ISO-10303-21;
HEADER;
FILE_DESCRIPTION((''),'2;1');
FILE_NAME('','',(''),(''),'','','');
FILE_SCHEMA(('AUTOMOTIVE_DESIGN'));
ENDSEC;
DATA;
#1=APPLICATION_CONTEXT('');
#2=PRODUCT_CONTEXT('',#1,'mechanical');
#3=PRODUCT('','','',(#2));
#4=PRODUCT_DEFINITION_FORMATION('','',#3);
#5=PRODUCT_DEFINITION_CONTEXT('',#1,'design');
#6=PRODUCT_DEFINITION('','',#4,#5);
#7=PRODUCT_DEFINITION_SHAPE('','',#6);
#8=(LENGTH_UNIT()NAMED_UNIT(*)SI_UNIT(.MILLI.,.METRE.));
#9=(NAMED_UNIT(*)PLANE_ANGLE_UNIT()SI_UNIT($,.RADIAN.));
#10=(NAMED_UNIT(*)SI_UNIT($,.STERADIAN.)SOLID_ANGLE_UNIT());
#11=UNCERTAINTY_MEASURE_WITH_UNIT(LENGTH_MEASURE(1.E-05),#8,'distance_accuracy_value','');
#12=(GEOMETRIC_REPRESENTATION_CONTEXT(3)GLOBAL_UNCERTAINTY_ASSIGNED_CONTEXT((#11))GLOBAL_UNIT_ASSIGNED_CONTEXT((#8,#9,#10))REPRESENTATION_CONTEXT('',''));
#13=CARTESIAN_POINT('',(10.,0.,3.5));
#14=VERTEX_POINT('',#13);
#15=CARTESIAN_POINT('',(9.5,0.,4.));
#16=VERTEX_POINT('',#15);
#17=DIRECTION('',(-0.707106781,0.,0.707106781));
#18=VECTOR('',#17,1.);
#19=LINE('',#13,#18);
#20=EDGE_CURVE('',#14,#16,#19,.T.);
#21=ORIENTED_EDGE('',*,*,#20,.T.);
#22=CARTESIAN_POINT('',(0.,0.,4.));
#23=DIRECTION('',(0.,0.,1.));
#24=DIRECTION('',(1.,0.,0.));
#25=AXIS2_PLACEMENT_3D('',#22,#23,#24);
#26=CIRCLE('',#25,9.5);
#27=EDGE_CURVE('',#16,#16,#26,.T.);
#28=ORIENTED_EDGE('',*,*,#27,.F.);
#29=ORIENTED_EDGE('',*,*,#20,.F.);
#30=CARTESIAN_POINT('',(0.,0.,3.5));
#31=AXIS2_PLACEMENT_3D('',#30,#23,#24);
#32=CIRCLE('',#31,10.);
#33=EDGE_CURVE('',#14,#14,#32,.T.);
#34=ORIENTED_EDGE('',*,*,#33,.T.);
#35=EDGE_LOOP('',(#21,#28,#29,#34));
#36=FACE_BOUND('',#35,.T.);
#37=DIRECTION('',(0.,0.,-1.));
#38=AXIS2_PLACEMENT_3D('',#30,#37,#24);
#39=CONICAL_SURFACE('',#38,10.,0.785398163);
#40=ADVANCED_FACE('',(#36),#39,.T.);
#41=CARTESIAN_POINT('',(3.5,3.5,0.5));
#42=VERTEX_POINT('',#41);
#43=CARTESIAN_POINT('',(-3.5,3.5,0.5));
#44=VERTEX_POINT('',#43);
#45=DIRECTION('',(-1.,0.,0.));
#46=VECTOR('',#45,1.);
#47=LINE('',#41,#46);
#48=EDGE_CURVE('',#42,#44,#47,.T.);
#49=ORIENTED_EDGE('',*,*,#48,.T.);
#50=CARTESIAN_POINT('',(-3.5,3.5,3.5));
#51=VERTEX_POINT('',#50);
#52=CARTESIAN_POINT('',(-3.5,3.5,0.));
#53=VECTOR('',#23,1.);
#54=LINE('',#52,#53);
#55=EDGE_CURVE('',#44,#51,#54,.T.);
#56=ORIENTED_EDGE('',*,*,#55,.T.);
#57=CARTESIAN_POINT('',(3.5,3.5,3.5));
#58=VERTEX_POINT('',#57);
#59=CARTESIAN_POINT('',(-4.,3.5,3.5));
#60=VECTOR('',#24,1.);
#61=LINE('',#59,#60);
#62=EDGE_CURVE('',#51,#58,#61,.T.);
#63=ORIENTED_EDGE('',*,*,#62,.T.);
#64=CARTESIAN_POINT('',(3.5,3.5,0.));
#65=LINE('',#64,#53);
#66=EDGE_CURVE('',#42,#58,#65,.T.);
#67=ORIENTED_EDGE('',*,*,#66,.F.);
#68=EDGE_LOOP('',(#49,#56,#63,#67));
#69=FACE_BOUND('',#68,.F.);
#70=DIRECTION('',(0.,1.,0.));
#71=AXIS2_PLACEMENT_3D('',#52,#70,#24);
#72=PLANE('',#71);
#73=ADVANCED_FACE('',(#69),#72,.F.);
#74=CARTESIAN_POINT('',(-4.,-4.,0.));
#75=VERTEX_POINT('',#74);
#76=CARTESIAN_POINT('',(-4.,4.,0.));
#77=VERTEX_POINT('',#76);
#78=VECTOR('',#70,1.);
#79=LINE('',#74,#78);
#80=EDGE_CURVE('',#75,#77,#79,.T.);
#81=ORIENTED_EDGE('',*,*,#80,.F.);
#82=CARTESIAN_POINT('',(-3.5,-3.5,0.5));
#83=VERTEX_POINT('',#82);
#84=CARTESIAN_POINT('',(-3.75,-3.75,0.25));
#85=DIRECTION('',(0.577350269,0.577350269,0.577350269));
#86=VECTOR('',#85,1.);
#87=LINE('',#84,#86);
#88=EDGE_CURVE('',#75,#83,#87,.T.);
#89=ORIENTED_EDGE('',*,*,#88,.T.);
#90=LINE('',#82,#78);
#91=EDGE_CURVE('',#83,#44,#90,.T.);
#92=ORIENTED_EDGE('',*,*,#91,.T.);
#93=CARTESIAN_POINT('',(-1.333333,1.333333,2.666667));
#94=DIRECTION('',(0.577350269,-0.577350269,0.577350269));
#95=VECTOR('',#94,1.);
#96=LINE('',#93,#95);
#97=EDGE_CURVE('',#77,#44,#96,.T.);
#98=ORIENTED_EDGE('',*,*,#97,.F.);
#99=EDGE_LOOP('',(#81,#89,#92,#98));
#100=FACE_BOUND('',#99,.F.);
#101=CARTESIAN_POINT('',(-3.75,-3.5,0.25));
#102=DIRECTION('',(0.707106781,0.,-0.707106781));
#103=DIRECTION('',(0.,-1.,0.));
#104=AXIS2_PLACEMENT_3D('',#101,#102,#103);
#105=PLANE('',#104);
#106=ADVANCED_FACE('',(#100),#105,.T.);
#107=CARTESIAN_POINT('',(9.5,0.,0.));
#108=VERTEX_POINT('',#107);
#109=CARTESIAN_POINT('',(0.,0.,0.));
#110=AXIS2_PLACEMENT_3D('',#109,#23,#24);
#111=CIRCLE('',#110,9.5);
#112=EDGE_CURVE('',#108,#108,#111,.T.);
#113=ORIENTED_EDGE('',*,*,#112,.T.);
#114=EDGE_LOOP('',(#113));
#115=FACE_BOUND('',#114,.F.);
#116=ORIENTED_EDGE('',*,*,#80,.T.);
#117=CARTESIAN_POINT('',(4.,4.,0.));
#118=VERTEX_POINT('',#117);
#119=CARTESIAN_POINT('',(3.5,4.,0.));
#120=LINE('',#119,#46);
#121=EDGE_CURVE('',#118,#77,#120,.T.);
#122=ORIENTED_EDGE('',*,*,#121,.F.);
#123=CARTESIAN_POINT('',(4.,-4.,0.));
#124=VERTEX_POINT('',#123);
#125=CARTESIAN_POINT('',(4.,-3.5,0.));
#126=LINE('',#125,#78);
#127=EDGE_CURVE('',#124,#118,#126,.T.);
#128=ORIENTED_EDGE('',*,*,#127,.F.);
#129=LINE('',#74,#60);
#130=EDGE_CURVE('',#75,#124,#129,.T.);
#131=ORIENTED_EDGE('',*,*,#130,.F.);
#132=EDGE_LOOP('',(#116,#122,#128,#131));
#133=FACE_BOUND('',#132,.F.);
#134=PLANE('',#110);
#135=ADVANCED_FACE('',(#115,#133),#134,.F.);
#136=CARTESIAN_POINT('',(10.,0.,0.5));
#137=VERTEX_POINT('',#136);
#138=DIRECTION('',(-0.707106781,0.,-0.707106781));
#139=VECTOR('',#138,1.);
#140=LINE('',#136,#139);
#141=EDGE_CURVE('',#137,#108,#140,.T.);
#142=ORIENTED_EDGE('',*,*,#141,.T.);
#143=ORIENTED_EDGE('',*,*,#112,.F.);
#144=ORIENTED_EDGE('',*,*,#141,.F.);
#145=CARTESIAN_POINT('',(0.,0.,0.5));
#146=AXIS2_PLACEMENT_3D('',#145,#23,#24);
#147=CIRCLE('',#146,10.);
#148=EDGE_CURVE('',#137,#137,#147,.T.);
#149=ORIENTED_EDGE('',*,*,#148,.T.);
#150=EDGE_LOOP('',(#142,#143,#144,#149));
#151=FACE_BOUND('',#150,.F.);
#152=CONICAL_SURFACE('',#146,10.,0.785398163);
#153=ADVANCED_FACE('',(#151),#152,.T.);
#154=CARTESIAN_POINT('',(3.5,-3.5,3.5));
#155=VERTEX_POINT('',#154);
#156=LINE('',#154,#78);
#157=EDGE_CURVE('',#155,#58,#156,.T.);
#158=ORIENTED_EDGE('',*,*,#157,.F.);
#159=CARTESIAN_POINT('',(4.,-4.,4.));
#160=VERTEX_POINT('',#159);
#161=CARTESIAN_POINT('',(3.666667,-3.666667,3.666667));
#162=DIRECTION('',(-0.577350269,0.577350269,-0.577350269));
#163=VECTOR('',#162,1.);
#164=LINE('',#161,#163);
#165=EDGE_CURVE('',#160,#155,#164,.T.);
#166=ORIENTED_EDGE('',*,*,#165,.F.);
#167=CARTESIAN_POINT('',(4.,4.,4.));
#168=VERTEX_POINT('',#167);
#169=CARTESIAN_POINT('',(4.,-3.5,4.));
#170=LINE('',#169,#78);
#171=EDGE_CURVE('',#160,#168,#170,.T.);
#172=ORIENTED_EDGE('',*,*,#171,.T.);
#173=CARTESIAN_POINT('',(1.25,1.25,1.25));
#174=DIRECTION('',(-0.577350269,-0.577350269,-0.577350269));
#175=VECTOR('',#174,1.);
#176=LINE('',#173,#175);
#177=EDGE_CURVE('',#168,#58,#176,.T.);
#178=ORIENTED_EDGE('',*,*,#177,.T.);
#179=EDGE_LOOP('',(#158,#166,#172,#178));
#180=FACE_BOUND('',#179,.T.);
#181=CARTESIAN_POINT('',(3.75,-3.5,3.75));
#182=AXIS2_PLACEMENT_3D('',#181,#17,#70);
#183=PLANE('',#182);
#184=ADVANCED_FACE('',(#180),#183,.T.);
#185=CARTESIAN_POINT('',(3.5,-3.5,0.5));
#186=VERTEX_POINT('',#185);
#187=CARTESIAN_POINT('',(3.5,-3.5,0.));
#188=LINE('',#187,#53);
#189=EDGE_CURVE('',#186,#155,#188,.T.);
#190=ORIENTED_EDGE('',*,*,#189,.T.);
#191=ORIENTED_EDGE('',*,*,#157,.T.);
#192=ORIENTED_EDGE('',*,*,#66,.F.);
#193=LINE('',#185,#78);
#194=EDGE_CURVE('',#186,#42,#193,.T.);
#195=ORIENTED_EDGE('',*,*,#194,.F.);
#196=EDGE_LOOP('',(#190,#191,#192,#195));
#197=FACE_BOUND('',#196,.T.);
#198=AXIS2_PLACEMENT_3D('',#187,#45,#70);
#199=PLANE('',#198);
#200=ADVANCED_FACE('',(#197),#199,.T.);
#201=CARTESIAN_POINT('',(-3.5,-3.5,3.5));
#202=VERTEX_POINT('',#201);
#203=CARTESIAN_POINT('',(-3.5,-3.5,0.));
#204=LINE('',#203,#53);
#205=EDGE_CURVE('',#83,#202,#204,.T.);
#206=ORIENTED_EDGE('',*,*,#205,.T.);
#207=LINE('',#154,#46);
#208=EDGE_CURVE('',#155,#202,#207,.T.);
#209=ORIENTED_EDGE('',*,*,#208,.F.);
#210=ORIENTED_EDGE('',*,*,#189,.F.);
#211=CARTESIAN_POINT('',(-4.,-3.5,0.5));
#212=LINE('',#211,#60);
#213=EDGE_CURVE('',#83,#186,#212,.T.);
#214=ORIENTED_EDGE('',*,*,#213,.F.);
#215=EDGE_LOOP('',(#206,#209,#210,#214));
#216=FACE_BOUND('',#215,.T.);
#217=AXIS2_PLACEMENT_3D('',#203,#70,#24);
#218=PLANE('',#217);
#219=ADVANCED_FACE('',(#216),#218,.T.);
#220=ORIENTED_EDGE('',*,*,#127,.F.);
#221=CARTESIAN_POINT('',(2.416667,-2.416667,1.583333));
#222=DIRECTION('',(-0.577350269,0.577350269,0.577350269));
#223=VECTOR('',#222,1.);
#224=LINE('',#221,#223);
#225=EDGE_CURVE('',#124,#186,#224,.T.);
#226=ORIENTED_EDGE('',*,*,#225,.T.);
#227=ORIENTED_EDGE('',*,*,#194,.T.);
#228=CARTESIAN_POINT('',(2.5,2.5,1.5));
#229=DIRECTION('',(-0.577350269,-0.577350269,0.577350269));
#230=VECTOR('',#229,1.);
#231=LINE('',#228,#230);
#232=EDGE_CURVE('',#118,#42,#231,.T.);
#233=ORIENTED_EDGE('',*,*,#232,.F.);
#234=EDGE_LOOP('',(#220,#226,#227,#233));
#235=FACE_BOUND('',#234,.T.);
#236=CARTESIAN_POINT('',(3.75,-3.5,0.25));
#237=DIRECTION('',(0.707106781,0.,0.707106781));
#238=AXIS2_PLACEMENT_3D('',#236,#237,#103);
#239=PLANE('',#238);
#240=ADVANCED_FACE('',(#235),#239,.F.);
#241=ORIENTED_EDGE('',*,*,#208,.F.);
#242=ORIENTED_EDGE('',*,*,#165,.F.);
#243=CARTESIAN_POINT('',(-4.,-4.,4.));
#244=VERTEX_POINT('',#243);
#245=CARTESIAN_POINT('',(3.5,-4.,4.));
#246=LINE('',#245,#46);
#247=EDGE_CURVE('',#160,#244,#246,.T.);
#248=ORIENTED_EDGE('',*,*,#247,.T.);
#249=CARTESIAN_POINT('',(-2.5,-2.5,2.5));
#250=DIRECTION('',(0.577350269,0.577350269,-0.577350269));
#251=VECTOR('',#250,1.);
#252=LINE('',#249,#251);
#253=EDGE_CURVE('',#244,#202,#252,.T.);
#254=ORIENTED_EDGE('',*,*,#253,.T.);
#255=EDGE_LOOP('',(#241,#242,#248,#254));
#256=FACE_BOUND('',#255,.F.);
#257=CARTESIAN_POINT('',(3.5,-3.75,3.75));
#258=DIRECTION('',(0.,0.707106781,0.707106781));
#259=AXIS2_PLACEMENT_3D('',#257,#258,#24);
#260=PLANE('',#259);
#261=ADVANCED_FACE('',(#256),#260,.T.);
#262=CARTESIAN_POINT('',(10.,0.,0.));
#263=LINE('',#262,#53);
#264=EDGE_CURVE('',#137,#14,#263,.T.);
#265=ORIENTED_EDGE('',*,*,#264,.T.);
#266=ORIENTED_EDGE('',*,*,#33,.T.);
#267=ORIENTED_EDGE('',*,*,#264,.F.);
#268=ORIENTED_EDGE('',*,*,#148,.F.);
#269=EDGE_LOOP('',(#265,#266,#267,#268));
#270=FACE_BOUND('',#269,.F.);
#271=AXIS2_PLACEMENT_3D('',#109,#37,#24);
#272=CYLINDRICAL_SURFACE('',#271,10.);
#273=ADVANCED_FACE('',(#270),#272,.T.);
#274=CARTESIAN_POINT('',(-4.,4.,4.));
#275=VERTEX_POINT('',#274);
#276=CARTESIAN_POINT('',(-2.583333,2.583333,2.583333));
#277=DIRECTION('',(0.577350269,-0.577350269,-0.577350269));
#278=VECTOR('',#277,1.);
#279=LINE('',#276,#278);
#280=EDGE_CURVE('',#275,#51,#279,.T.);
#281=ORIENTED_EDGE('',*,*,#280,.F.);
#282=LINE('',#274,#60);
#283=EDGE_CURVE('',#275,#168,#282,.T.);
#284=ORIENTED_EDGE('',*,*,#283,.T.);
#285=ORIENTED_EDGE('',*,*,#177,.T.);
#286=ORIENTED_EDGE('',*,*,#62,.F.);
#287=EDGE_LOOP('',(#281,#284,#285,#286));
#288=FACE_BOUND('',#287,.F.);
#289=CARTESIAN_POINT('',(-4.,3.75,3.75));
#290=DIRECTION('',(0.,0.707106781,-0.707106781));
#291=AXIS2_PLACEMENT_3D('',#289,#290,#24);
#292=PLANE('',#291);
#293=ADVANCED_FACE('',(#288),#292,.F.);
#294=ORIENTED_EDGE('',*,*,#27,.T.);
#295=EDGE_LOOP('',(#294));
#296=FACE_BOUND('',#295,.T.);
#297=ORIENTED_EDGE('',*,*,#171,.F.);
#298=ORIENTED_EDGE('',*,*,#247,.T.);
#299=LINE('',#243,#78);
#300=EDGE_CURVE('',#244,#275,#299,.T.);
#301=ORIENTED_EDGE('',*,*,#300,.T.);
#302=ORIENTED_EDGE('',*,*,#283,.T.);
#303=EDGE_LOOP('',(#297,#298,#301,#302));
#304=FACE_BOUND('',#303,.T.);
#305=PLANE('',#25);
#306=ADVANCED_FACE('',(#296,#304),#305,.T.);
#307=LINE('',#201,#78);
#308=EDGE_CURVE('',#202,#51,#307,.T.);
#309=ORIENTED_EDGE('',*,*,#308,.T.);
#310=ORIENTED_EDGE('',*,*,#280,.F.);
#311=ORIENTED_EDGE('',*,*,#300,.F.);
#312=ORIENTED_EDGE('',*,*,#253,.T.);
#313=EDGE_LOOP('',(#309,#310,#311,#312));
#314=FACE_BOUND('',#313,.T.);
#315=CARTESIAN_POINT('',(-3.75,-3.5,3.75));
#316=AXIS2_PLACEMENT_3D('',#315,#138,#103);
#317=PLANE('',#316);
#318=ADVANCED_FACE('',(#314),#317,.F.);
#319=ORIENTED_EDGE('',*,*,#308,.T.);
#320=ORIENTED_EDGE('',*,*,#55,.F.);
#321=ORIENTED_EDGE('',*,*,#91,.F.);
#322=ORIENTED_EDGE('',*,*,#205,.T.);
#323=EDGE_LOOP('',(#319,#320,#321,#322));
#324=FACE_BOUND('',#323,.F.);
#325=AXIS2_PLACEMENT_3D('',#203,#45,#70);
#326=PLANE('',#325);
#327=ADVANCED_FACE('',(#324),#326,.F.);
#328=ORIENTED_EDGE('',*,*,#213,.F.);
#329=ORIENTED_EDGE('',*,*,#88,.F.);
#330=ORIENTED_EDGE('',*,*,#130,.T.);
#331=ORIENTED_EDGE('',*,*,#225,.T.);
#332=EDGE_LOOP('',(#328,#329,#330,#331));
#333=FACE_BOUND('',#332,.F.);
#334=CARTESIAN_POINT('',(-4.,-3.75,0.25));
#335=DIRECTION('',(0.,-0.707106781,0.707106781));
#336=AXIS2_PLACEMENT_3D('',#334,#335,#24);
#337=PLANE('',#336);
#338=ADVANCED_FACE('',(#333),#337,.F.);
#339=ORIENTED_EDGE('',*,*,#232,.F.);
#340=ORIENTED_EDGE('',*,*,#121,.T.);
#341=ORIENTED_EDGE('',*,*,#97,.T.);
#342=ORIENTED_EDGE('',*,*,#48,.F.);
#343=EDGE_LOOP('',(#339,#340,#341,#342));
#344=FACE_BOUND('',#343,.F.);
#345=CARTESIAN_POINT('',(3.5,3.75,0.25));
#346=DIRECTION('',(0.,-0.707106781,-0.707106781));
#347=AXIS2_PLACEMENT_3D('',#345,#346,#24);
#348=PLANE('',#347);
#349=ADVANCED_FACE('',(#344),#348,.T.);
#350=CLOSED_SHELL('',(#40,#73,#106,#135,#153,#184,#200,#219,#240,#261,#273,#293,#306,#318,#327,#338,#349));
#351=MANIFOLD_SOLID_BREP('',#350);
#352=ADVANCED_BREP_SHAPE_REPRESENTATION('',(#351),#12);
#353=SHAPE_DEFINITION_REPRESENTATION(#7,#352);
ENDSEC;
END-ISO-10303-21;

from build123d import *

# Parameters (mm, degrees)
F0_R     = 10
F0_W     = 7
F0_H     = 7
F1_DEPTH = 4
F2_SIZE  = 0.5
F3_SIZE  = 0.5


with BuildPart() as f1:
    # F0 (on Top) → F1 (new body)
    with BuildSketch(Plane.XY):
        Circle(F0_R)
        Rectangle(F0_W, F0_H, mode=Mode.SUBTRACT)
    extrude(amount=F1_DEPTH)

    # F2
    f2_edges = [f1.edges().sort_by_distance(p)[0] for p in [
        (-10, 0, 4),
        (-10, 0, 0),
        (-3.5, 0, 0),
        (-3.5, 0, 4),
    ]]
    chamfer(f2_edges, length=F2_SIZE)

    # F3
    f3_edges = [f1.edges().sort_by_distance(p)[0] for p in [
        (0, 3.5, 4),
        (3.5, 0, 4),
        (0, -3.5, 4),
        (0, -3.5, 0),
        (0, 3.5, 0),
        (3.5, 0, 0),
        (-3.75, -3.5, 0),
        (-3.75, 3.5, 0),
        (-3.75, -3.5, 4),
        (-3.75, 3.5, 4),
    ]]
    chamfer(f3_edges, length=F3_SIZE)


solid = f1.part
